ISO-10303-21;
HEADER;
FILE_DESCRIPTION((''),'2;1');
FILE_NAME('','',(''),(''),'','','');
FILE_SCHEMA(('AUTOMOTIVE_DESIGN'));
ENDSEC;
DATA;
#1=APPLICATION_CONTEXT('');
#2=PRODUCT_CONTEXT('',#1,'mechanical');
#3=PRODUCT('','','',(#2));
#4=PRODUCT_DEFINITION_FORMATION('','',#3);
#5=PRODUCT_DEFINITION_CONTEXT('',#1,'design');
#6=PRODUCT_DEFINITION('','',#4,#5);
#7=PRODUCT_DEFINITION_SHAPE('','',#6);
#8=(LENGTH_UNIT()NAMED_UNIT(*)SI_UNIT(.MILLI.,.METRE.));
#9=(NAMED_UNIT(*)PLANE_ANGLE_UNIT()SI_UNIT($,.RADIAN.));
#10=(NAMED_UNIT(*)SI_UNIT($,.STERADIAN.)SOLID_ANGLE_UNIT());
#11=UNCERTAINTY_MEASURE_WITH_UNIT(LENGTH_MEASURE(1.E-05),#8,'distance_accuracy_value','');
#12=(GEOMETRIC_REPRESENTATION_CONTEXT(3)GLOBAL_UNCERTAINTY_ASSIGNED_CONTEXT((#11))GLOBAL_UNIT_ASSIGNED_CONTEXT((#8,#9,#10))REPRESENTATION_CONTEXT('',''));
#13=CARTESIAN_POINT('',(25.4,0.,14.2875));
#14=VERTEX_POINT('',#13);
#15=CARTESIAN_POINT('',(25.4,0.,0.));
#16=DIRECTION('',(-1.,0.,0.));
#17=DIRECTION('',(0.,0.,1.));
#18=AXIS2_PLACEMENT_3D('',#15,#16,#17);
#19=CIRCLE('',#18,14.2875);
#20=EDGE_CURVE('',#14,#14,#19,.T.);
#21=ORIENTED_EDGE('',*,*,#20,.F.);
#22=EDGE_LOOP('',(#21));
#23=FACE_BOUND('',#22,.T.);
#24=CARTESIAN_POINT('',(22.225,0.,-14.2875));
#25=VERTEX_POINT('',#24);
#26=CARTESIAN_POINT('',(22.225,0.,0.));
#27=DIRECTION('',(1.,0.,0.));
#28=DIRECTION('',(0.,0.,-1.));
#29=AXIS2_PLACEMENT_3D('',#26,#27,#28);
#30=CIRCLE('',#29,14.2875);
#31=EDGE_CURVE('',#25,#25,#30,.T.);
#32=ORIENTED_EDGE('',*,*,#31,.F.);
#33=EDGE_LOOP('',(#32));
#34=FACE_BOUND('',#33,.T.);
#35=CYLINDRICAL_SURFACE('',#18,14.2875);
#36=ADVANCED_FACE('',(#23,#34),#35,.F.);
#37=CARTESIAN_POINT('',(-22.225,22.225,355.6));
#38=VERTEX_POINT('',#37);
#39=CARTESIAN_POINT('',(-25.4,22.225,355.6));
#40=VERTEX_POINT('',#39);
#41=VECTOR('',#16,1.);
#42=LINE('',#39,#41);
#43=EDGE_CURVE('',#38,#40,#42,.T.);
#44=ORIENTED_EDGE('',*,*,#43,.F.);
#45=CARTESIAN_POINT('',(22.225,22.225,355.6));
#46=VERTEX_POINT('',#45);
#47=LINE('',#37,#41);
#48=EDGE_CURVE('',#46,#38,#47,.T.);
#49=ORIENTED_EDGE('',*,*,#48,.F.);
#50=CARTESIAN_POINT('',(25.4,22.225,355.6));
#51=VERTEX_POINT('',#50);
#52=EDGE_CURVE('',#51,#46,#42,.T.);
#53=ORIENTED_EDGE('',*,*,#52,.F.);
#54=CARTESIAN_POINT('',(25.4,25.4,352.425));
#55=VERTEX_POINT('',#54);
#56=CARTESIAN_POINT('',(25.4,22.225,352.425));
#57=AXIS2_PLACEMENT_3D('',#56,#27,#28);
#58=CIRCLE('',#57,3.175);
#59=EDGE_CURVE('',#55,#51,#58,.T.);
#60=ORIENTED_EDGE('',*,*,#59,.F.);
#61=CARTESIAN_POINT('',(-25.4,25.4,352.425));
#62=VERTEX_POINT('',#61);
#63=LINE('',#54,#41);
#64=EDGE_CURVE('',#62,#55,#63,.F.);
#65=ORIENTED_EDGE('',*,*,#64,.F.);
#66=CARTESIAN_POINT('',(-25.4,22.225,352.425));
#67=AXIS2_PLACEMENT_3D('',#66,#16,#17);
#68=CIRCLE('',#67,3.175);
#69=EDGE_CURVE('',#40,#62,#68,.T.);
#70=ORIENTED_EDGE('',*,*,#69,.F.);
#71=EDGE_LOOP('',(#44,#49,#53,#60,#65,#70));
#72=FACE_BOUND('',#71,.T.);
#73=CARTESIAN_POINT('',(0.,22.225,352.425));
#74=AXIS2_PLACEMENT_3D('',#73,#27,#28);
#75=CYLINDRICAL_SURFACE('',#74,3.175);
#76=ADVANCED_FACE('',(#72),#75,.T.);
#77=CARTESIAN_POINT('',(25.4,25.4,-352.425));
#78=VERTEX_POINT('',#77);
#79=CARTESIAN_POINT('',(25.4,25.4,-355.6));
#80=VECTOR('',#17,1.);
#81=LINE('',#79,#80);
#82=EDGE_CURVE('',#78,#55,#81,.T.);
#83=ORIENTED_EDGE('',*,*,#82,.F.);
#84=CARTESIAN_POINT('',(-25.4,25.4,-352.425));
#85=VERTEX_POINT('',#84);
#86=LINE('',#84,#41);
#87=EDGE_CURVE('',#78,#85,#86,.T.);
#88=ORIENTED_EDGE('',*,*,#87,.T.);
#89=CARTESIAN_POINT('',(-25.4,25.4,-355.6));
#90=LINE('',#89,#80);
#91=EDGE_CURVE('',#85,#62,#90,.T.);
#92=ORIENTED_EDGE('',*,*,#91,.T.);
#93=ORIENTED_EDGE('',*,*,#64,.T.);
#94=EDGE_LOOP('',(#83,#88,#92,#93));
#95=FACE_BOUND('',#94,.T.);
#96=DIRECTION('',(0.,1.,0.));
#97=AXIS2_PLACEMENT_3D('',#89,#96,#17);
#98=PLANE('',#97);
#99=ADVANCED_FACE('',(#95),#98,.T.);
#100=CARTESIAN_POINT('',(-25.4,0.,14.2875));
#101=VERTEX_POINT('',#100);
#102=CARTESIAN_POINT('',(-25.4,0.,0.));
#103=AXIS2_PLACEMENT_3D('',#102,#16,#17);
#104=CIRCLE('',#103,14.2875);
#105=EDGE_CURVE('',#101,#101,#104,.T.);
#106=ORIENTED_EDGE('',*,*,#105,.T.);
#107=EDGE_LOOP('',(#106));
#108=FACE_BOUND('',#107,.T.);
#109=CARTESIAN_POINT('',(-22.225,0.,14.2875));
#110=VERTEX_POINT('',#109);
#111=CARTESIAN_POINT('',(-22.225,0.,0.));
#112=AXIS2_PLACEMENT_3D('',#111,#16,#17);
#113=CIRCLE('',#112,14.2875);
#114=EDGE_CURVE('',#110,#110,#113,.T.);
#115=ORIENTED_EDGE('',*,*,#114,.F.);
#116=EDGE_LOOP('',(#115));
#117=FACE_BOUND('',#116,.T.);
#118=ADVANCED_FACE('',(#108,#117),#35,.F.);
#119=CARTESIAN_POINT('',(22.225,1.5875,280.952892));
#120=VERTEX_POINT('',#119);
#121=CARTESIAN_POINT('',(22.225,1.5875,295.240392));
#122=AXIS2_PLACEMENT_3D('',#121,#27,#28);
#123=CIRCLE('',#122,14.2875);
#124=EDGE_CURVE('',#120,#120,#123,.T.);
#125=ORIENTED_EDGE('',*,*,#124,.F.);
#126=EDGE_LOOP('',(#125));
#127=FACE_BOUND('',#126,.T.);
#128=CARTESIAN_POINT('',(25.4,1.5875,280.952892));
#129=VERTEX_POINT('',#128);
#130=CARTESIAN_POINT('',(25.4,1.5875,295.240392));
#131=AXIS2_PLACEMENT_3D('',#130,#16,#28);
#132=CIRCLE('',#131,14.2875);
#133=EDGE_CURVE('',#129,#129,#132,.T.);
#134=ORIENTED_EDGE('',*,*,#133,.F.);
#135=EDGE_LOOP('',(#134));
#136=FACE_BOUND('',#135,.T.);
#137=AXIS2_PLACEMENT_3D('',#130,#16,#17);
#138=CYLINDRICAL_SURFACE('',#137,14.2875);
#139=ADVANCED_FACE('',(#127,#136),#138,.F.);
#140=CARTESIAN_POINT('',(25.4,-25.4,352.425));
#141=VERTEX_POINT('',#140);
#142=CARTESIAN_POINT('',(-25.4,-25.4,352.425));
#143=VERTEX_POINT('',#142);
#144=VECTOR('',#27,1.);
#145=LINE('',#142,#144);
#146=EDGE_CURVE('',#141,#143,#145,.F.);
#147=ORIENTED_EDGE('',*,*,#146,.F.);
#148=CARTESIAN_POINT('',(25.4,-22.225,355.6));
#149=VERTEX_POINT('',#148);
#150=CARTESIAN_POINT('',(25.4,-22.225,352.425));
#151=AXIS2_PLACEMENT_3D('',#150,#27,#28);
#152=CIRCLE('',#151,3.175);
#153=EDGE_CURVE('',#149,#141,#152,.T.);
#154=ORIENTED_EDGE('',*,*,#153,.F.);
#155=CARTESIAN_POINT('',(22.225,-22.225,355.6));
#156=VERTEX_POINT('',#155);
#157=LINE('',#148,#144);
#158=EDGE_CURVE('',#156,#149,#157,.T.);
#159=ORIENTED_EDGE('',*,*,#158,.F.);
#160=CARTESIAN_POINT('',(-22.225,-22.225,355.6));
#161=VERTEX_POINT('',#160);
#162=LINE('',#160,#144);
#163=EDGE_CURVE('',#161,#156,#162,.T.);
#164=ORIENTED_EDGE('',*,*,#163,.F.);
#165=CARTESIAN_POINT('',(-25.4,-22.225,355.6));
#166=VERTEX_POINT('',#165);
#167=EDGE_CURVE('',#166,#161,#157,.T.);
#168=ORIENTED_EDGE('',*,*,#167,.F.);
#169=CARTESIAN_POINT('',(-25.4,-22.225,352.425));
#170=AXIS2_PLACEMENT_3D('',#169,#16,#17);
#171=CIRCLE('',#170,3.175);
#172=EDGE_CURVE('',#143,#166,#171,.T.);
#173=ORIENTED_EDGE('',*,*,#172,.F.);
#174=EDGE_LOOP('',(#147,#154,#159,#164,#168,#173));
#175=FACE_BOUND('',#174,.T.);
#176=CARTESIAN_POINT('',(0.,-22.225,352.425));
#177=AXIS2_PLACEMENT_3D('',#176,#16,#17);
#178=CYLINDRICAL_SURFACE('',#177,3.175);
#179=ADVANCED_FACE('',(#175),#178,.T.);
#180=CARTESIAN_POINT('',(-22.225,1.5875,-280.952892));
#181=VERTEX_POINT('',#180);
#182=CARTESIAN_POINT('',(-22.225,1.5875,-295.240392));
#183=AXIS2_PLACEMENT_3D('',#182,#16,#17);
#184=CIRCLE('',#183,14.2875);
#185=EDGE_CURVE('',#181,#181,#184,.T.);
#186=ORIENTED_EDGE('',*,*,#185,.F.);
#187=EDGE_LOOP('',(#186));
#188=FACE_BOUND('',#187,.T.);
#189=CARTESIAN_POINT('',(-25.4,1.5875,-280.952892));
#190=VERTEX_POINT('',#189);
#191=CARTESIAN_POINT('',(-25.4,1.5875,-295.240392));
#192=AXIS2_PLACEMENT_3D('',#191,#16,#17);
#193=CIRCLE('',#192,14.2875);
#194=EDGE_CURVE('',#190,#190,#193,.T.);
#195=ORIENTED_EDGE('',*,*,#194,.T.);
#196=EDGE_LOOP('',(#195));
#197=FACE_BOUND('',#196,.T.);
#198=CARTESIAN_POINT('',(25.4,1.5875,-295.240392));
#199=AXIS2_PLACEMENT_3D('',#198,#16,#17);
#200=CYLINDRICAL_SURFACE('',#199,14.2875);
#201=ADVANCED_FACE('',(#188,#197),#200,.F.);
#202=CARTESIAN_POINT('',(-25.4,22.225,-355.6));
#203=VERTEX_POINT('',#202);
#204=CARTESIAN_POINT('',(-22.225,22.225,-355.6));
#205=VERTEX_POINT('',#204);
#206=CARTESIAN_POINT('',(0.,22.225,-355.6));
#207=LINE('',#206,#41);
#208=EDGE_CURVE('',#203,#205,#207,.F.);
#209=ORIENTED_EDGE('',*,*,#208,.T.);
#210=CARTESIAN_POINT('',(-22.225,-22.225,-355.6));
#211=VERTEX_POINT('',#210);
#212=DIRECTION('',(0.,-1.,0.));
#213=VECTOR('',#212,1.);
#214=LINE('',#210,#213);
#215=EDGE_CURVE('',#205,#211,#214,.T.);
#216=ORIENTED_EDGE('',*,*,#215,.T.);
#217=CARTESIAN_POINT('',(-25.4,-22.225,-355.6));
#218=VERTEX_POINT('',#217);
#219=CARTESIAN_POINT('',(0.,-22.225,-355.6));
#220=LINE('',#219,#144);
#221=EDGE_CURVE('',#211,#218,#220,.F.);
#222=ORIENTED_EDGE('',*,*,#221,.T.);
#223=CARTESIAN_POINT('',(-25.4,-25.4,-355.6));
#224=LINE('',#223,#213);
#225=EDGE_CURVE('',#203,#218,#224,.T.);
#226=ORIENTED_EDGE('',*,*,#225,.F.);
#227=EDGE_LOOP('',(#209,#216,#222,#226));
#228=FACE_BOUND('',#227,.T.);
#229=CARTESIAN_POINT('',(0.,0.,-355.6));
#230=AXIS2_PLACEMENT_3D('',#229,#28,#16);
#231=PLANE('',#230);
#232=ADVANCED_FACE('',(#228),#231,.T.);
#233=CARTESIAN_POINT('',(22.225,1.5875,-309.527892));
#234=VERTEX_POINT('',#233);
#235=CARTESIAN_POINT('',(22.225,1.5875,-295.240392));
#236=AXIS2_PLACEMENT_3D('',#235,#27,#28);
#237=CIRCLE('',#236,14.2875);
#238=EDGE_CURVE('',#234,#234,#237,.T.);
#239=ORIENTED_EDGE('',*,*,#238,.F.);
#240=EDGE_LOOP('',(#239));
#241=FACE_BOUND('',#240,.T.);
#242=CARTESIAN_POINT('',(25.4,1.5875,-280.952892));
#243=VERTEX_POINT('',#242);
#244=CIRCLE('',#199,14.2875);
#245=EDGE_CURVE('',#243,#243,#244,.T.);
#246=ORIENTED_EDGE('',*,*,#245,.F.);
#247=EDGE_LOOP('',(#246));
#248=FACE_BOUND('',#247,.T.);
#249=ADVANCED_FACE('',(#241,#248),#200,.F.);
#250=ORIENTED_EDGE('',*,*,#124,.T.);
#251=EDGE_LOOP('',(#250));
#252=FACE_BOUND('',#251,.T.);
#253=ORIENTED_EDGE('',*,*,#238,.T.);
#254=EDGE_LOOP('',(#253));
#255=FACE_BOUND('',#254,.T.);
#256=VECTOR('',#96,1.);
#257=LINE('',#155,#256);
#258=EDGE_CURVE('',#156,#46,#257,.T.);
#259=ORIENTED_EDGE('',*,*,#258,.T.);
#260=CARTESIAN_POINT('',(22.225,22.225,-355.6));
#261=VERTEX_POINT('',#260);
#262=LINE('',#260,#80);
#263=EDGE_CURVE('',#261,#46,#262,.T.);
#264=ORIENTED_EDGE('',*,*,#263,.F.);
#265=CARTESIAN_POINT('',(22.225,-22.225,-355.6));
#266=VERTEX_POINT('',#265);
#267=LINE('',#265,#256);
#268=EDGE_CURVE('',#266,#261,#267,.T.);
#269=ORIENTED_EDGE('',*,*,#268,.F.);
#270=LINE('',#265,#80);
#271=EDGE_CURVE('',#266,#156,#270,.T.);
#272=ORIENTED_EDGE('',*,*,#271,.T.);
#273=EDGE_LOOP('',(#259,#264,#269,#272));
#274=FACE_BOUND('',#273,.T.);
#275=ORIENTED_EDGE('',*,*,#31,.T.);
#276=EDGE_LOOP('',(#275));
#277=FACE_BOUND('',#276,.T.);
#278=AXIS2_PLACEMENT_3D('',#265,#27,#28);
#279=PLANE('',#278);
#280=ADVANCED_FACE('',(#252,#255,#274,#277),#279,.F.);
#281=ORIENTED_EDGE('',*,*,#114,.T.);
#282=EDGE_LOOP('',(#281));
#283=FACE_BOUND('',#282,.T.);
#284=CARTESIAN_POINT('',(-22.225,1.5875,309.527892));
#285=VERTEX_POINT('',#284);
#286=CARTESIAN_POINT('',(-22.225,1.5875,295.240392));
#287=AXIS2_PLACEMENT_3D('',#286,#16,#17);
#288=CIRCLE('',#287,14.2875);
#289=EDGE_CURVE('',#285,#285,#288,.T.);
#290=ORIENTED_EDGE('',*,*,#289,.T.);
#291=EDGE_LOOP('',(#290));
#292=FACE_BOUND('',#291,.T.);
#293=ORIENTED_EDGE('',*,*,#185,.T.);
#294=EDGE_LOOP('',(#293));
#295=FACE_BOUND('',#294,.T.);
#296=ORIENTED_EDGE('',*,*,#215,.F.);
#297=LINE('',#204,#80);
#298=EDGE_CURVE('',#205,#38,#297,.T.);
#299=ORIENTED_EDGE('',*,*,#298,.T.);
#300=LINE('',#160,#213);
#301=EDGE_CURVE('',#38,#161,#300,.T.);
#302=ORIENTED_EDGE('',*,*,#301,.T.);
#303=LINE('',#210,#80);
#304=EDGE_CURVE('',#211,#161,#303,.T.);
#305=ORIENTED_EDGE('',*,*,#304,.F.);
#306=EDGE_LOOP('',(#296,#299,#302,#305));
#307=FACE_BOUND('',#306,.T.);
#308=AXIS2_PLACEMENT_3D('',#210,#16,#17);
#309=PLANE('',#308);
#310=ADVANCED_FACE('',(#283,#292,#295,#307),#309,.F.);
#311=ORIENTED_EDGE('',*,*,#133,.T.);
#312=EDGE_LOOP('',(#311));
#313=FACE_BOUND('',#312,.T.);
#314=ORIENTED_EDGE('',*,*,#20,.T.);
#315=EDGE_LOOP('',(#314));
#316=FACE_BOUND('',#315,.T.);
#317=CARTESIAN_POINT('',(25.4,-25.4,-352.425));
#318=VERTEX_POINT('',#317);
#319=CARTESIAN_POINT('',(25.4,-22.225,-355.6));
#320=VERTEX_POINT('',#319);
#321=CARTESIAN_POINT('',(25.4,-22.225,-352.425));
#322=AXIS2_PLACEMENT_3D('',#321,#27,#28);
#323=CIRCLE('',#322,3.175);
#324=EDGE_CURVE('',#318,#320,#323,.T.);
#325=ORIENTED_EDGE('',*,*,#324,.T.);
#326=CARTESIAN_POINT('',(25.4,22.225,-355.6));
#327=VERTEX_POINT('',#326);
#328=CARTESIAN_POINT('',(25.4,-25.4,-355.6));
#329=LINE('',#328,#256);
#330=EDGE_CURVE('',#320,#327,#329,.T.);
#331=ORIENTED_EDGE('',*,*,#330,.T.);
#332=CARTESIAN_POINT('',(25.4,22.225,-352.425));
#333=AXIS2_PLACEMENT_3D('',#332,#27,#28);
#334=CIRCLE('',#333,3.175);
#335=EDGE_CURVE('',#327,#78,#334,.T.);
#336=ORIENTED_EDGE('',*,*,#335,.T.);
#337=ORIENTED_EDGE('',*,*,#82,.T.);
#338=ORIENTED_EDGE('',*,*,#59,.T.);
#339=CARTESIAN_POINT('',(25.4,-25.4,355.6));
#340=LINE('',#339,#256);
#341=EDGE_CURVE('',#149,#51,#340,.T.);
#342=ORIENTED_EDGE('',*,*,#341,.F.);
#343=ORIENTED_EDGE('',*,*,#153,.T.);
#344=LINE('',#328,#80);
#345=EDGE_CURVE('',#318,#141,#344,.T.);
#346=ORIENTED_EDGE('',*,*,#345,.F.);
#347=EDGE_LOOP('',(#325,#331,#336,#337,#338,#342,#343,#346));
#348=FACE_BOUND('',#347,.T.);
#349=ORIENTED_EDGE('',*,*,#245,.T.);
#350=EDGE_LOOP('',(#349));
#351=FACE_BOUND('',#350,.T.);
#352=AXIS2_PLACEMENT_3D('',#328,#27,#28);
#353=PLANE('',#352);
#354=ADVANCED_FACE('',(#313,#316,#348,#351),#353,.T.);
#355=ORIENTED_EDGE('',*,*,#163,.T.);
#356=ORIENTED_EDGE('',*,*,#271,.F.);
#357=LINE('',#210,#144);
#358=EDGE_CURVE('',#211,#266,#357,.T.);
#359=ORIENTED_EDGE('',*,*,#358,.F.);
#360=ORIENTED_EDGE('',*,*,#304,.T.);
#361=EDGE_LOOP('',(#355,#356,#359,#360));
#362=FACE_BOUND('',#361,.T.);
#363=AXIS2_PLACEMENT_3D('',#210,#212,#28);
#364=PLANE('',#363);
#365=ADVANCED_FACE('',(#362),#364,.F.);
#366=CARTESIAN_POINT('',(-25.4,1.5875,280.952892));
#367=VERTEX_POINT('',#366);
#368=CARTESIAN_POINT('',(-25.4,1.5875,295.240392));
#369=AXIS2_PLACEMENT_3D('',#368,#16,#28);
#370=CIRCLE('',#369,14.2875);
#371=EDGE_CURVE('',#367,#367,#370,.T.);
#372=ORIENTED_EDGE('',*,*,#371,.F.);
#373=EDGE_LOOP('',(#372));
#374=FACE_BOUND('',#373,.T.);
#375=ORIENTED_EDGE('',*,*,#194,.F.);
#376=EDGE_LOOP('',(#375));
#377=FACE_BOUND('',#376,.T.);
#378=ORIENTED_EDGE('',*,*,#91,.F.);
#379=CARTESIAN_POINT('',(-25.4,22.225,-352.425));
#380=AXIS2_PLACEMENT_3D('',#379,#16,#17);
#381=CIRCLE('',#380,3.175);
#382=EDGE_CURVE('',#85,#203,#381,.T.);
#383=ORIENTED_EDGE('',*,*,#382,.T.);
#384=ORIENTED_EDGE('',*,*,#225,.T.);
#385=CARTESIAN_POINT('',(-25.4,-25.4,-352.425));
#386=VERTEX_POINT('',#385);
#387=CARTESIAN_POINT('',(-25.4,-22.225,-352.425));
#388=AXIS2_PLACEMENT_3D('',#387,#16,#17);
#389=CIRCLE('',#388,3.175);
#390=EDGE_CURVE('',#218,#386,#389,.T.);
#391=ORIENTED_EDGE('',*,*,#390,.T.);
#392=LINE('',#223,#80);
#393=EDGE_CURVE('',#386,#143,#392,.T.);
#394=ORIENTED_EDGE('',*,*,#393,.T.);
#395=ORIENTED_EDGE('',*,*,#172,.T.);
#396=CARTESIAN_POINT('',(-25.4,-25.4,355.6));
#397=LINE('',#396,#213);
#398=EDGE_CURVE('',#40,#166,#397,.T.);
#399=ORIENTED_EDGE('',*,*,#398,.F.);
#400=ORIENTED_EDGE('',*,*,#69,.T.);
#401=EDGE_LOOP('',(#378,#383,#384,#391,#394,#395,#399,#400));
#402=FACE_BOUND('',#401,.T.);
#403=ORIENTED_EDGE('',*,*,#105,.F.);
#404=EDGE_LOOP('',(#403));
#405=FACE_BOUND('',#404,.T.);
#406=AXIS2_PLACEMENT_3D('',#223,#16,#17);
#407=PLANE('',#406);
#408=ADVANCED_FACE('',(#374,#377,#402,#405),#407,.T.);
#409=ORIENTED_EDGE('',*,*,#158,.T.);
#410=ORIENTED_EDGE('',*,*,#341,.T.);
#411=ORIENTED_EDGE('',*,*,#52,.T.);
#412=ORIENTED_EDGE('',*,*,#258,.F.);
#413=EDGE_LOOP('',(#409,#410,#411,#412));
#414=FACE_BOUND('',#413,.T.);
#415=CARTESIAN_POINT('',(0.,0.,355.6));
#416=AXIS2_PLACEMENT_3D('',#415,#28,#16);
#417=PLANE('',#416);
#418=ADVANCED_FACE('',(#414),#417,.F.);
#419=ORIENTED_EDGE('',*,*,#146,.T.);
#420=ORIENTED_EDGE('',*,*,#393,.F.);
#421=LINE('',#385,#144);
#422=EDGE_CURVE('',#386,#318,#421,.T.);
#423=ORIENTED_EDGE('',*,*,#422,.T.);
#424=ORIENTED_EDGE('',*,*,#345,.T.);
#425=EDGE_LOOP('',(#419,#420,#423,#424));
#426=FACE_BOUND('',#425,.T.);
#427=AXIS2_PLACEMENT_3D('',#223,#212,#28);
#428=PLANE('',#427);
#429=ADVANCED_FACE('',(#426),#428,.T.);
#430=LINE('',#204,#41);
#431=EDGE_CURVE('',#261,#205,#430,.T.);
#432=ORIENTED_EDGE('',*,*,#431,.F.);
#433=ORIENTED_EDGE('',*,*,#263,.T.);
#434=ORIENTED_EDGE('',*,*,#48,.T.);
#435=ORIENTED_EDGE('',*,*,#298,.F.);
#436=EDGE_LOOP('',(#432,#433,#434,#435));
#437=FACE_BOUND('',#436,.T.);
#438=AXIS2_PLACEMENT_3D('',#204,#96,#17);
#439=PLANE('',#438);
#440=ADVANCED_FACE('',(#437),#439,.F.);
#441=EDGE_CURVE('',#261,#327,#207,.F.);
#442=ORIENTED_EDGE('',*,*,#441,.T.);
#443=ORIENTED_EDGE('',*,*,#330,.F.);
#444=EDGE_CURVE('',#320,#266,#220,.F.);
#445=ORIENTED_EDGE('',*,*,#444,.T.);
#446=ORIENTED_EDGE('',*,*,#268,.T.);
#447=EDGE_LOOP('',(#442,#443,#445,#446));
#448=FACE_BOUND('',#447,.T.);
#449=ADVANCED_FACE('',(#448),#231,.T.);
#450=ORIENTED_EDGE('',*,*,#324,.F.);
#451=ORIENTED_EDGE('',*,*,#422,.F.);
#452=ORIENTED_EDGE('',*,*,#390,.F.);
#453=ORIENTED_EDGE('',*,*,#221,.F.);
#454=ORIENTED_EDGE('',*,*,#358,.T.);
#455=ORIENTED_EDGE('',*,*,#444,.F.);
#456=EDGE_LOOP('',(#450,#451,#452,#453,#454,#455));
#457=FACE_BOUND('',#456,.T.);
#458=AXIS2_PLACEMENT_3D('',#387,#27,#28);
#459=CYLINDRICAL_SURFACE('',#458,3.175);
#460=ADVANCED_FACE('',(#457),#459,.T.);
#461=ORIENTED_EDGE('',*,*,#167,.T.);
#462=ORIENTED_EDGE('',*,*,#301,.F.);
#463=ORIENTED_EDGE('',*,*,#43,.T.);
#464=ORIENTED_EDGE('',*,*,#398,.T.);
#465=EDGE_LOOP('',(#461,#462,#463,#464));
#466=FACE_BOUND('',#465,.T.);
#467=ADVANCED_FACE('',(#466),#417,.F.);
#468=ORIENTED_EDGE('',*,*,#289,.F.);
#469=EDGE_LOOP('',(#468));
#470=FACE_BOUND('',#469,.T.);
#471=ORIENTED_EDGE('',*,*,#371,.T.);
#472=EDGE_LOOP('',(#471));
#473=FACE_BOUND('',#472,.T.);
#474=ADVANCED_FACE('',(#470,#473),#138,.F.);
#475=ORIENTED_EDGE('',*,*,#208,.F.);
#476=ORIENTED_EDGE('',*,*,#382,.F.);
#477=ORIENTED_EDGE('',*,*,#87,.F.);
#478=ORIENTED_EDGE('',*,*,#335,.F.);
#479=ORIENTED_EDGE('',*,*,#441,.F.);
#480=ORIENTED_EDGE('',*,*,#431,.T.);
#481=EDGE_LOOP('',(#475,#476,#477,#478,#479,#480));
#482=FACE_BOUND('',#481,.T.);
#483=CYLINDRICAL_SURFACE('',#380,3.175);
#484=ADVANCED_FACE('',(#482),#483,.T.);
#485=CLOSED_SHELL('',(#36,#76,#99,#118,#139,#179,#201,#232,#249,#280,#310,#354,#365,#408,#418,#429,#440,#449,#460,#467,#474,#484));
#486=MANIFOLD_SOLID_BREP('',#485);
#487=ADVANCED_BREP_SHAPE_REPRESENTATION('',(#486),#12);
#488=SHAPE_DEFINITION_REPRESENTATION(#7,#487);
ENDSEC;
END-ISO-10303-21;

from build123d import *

# Parameters (mm, degrees)
BOSS_EXTRUDE1_DEPTH      = 355.6
BOSS_EXTRUDE1_DEPTH_BACK = 355.6
SKETCH1_W                = 50.8
SKETCH1_H                = 50.8
SKETCH1_W_2              = 44.45
SKETCH1_H_2              = 44.45
SKETCH2_R                = 14.2875
CUT_EXTRUDE1_DEPTH       = 361.10715072
FILLET1_R                = 3.175


with BuildPart() as part:
    # Sketch1 → Boss-Extrude1 (new, two sides: drawn at the far end of the back side and taken through both)
    with BuildSketch(Plane.XY.offset(-BOSS_EXTRUDE1_DEPTH_BACK)):
        Rectangle(SKETCH1_W, SKETCH1_H)
        Rectangle(SKETCH1_W_2, SKETCH1_H_2, mode=Mode.SUBTRACT)
    extrude(amount=BOSS_EXTRUDE1_DEPTH + BOSS_EXTRUDE1_DEPTH_BACK)

    # Sketch2 → Cut-Extrude1 (cut, through all)
    with BuildSketch(Plane.ZY.offset(25.4)):
        with Locations((-295.240391678, 1.5875)):
            Circle(SKETCH2_R)
        Circle(SKETCH2_R)
        with Locations((295.240391678, 1.5875)):
            Circle(SKETCH2_R)
    extrude(amount=-CUT_EXTRUDE1_DEPTH, mode=Mode.SUBTRACT)

    # Fillet1
    fillet1_edges = [part.edges().sort_by_distance(p)[0] for p in [
        (0, -25.4, -355.6),
        (0, 25.4, 355.6),
        (0, -25.4, 355.6),
        (0, 25.4, -355.6),
    ]]
    fillet(fillet1_edges, radius=FILLET1_R - 0.0001)  # a hair under: the kernel refuses the full size


solid = part.part
